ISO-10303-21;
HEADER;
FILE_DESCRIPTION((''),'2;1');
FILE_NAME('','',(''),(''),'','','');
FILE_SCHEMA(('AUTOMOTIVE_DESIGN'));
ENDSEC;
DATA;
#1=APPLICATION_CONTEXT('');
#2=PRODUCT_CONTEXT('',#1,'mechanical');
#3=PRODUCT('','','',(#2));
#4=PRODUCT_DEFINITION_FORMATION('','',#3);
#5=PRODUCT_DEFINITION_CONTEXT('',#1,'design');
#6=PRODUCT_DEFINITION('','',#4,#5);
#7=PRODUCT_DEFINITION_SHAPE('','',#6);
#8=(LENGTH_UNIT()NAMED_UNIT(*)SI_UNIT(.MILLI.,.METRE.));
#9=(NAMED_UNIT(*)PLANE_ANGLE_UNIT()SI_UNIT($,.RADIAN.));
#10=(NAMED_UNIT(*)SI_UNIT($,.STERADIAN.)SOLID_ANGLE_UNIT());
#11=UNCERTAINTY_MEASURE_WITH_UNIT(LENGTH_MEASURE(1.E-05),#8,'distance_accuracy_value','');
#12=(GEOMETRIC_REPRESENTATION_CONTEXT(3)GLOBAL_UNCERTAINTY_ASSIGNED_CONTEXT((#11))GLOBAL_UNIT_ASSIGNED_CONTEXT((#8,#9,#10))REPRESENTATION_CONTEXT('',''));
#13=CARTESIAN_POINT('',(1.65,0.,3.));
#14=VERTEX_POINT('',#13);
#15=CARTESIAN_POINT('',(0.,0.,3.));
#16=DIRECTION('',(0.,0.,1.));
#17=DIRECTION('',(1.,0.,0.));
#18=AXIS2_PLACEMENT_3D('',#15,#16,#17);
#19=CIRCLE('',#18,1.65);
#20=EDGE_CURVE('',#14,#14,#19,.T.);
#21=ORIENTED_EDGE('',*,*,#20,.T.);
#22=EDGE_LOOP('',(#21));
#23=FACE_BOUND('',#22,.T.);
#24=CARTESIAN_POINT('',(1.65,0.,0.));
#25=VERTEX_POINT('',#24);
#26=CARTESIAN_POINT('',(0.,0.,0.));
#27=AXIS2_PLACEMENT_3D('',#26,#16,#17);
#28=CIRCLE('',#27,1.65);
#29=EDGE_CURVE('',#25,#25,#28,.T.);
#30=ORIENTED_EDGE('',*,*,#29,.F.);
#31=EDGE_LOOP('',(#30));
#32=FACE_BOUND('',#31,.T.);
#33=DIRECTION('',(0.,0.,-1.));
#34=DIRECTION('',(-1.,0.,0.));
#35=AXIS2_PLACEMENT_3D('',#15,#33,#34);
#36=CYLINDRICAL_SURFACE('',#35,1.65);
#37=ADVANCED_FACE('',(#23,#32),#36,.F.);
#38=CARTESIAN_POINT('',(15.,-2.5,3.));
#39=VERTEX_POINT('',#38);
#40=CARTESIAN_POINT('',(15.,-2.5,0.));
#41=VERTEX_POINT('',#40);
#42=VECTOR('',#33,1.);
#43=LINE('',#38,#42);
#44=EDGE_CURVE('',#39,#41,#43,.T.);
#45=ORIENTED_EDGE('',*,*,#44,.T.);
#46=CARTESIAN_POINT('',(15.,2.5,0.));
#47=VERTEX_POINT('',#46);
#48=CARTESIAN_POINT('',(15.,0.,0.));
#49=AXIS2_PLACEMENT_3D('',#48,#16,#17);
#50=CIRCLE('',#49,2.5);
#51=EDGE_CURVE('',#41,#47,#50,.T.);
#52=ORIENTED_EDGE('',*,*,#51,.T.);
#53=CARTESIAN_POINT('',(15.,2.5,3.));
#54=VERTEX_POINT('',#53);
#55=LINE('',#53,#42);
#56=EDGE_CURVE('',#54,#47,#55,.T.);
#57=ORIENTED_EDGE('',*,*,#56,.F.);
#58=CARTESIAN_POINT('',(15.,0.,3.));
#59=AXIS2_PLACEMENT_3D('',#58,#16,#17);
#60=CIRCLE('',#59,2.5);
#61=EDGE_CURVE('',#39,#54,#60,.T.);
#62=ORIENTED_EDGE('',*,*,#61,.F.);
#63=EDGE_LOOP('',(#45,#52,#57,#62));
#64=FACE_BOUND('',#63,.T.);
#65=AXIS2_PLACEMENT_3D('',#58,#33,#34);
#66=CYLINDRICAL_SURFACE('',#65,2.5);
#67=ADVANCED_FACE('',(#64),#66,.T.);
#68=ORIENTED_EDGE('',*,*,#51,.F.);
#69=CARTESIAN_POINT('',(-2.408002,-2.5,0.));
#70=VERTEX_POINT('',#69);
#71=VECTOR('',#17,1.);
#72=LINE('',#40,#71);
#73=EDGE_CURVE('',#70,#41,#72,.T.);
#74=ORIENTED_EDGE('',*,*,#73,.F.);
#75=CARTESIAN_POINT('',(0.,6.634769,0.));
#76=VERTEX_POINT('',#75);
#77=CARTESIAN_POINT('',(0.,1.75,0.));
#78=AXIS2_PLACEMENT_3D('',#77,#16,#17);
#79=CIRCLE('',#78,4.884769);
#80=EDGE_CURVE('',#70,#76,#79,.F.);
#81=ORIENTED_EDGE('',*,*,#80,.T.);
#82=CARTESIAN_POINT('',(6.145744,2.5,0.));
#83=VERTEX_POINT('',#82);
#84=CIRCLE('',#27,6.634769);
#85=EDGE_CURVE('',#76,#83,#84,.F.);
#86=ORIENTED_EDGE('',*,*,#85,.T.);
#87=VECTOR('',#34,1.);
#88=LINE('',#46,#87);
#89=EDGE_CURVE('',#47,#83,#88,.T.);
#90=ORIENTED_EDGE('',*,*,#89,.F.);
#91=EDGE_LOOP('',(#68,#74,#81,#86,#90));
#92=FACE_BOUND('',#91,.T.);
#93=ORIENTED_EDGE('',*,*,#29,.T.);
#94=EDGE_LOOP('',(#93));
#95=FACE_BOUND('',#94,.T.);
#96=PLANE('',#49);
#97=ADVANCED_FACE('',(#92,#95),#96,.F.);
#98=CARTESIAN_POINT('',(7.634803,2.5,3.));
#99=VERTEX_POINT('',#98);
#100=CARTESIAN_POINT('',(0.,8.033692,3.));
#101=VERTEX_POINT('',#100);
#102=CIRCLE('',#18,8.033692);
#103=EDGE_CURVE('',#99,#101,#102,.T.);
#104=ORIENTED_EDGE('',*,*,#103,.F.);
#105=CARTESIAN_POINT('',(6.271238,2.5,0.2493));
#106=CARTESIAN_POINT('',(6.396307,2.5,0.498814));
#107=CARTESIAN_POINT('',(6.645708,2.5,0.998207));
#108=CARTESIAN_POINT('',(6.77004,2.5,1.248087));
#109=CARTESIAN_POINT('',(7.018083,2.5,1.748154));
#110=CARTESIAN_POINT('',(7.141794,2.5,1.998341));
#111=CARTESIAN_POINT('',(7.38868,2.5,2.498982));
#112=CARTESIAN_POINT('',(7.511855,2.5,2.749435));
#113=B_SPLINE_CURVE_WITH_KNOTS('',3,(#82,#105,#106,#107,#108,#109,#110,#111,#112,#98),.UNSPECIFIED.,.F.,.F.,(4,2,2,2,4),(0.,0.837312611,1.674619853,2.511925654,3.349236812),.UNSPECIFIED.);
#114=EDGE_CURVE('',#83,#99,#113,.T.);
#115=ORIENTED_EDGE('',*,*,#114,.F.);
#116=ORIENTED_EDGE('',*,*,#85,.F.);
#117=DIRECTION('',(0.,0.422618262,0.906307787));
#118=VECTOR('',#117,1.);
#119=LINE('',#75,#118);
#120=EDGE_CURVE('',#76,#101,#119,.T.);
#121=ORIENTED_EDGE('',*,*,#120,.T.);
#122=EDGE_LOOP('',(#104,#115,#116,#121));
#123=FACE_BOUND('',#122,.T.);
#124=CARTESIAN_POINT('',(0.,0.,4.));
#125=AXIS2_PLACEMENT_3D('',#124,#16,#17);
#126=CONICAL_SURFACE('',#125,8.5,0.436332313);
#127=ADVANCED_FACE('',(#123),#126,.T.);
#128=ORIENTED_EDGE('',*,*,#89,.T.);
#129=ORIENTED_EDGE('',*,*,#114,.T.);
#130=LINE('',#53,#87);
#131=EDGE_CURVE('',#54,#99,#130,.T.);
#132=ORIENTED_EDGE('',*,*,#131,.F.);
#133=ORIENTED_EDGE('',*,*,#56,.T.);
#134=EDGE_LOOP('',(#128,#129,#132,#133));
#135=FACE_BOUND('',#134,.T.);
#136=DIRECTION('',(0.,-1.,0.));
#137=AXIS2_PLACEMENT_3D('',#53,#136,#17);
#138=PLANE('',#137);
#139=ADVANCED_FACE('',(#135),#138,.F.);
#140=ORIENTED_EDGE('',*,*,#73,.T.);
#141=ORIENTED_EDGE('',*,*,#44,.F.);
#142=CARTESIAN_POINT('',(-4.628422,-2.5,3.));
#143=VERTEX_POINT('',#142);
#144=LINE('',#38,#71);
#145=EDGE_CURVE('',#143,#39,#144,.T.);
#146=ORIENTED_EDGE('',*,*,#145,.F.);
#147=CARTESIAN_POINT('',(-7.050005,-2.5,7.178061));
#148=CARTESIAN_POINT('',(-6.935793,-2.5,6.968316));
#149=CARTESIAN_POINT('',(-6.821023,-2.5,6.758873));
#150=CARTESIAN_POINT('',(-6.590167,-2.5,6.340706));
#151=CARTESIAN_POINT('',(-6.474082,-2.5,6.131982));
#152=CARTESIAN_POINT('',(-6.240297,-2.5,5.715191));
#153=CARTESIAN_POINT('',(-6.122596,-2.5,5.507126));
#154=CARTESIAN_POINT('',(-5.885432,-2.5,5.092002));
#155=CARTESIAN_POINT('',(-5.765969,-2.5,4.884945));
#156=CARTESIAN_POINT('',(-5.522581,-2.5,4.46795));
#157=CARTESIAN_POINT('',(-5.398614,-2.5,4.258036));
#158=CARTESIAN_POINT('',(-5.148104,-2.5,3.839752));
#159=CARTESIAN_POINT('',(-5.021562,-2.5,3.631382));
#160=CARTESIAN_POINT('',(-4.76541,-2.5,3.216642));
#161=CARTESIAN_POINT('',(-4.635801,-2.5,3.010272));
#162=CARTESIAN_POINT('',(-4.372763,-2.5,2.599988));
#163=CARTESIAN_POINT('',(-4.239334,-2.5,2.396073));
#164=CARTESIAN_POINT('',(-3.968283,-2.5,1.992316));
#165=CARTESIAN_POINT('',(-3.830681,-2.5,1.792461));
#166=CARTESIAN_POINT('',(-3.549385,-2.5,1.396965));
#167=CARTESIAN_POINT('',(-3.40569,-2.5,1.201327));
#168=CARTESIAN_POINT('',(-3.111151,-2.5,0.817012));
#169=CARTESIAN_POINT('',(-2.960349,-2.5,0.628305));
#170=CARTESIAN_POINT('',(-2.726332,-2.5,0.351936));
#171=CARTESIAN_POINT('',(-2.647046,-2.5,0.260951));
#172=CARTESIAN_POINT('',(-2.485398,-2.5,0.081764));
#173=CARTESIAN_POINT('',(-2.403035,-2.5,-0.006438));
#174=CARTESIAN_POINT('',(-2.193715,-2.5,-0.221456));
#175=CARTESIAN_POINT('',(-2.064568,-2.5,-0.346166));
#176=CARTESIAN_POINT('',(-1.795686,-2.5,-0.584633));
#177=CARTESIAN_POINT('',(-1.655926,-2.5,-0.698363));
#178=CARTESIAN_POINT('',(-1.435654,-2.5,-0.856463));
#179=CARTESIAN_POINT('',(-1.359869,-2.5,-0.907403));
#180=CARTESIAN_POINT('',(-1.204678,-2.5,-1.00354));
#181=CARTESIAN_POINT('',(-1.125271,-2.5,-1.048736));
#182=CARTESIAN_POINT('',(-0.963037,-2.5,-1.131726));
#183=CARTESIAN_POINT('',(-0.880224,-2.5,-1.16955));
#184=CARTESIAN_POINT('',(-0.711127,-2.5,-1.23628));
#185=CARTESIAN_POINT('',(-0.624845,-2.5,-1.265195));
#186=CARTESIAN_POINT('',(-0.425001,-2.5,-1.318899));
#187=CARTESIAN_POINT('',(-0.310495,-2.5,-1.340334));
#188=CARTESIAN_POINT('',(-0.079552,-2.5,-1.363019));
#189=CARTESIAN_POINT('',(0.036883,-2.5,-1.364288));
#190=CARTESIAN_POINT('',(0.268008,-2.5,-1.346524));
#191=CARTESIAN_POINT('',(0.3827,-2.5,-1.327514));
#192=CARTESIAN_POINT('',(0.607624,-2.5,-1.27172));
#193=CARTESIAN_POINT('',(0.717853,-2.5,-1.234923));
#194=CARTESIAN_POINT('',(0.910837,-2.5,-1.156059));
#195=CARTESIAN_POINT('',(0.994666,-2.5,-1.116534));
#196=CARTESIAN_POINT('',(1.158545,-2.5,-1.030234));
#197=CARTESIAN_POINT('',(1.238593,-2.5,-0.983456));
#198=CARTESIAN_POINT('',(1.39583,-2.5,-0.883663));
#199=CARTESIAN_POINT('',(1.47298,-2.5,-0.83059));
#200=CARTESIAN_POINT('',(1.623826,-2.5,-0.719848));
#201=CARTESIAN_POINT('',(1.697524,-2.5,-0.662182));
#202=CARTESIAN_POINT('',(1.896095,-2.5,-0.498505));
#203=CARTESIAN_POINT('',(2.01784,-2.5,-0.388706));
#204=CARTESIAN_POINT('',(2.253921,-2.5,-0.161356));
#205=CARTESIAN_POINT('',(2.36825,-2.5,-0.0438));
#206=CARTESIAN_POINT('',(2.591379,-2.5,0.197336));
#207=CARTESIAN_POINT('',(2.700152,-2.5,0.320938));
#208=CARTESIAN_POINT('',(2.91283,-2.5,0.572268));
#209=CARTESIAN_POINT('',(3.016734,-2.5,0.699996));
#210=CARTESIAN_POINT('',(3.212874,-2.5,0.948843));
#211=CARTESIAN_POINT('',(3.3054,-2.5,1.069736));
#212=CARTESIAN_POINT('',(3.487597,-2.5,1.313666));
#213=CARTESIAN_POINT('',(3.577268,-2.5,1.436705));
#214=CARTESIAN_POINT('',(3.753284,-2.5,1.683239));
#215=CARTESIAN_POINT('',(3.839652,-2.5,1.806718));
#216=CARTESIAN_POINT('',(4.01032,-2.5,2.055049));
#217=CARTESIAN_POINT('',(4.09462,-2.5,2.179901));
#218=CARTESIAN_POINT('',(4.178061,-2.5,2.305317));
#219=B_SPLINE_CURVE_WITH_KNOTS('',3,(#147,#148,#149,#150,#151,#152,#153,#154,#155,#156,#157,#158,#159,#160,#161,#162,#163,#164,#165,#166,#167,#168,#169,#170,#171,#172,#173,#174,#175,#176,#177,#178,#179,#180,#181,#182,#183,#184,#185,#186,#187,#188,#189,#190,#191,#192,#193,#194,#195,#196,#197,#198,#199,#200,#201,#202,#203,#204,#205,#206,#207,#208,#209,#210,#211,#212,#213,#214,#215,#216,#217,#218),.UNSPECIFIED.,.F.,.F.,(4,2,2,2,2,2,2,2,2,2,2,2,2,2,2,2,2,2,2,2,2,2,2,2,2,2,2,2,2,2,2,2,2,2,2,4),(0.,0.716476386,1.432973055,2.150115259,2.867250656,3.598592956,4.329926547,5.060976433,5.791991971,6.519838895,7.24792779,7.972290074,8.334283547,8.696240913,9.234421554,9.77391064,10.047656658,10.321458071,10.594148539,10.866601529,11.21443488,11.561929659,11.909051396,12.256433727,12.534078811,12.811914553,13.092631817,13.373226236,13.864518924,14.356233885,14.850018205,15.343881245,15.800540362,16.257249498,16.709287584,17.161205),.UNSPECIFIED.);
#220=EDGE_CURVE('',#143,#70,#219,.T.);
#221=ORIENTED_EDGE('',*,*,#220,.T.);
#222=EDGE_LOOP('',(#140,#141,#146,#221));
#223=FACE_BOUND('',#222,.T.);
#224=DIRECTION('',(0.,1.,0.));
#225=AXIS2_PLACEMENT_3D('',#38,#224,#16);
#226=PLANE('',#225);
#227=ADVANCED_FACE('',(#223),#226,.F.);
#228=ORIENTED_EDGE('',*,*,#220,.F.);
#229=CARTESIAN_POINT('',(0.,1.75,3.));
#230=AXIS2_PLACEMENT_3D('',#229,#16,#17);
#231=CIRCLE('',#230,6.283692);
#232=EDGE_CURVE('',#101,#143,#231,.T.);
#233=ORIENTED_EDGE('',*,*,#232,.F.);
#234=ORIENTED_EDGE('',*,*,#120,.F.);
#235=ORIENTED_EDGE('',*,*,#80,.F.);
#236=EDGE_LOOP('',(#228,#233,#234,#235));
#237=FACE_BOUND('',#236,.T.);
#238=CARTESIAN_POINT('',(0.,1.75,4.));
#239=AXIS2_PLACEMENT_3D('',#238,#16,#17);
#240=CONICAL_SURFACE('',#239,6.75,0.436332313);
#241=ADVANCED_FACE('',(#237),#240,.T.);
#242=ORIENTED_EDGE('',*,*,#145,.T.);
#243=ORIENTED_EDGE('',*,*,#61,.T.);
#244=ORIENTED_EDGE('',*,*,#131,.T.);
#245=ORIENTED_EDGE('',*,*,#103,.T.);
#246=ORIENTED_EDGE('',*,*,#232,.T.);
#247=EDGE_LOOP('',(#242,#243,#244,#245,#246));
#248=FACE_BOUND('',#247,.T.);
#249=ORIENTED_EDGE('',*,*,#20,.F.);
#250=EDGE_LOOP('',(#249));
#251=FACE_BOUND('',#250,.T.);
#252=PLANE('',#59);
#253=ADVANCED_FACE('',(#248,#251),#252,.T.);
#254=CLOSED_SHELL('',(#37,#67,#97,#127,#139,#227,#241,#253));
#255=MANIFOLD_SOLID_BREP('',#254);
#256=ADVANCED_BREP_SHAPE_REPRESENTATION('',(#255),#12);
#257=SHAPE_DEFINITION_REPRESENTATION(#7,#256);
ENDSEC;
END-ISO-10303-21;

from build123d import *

# Parameters (mm, degrees)
ESBO_O2_R                = 1.65
RESSALTO_EXTRUS_O1_DEPTH = 3
CHANFRO1_SIZE            = 4
CHANFRO1_SIZE_2          = 1.865230633
ESBO_O3_W                = 16.82142479
ESBO_O3_H                = 3.834770965
CORTE_EXTRUS_O1_DEPTH    = 5


with BuildPart() as part:
    # Esboço2 → Ressalto-extrusão1 (new body)
    with BuildSketch(Plane.XY):
        with BuildLine():
            Line((15, 2.5), (8.124038405, 2.5))
            ThreePointArc((8.124038405, 2.5), (5.049752469, 6.837397166), (0, 8.5))
            ThreePointArc((0, 8.5), (-6.75, 1.75), (0, -5))
            ThreePointArc((0, -5), (2.5, -4.330127019), (4.330127019, -2.5))
            Line((4.330127019, -2.5), (15, -2.5))
            ThreePointArc((15, -2.5), (17.5, 0), (15, 2.5))
        make_face()
        Circle(ESBO_O2_R, mode=Mode.SUBTRACT)
    extrude(amount=RESSALTO_EXTRUS_O1_DEPTH)

    # Chanfro1
    # the kernel refuses this chamfer: 4, 1.865230633 mm, written as the material it takes off along each edge
    with BuildSketch(Plane(origin=(0, 0, 0), x_dir=(0.6049671971575049, -0.7962503942626293, 0), z_dir=(-0.7962503942626293, -0.6049671971575049, 0))) as chanfro1_piece_1_section:
        Polygon((8.5, CHANFRO1_SIZE), (8.5 - CHANFRO1_SIZE_2, 0), (8.5, 0), align=None)
    chanfro1_piece_1 = revolve(axis=Axis((0, 0, 0), (0, 0, 1)), revolution_arc=142.773518556, mode=Mode.PRIVATE)
    chanfro1_piece_1 = split(chanfro1_piece_1, bisect_by=Plane(origin=(6.168513844, 2.5, 1.415637253), z_dir=(0, 1, 0)), keep=Keep.TOP, mode=Mode.PRIVATE)
    add(chanfro1_piece_1, mode=Mode.SUBTRACT)
    with BuildSketch(Plane(origin=(0, 0, 0), x_dir=(0, -1, 0), z_dir=(-1, 0, 0))) as chanfro1_piece_2_section:
        Polygon((5, CHANFRO1_SIZE), (5 - CHANFRO1_SIZE_2, 0), (5, 0), align=None)
    chanfro1_piece_2 = revolve(axis=Axis((0, 0, 0), (0, 0, 1)), revolution_arc=178.782767485, mode=Mode.PRIVATE)
    chanfro1_piece_2 = split(chanfro1_piece_2, bisect_by=Plane(origin=(1.977914481, -2.5, 1.262439035), z_dir=(0, -1, 0)), keep=Keep.TOP, mode=Mode.PRIVATE)
    add(chanfro1_piece_2, mode=Mode.SUBTRACT)
    with BuildSketch(Plane(origin=(0, 1.75, 0), x_dir=(0, 1, 0), z_dir=(1, 0, 0))) as chanfro1_piece_3:
        Polygon((6.75, CHANFRO1_SIZE), (6.75 - CHANFRO1_SIZE_2, 0), (6.75, 0), align=None)
    revolve(axis=Axis((0, 1.75, 0), (0, 0, 1)), revolution_arc=180, mode=Mode.SUBTRACT)

    # Esboço3 → Corte-extrusão1 (cut)
    with BuildSketch(Plane.XY.offset(3)):
        with Locations((-0.707373788, -4.417385483)):
            Rectangle(ESBO_O3_W, ESBO_O3_H)
    extrude(amount=-CORTE_EXTRUS_O1_DEPTH, mode=Mode.SUBTRACT)


solid = part.part
